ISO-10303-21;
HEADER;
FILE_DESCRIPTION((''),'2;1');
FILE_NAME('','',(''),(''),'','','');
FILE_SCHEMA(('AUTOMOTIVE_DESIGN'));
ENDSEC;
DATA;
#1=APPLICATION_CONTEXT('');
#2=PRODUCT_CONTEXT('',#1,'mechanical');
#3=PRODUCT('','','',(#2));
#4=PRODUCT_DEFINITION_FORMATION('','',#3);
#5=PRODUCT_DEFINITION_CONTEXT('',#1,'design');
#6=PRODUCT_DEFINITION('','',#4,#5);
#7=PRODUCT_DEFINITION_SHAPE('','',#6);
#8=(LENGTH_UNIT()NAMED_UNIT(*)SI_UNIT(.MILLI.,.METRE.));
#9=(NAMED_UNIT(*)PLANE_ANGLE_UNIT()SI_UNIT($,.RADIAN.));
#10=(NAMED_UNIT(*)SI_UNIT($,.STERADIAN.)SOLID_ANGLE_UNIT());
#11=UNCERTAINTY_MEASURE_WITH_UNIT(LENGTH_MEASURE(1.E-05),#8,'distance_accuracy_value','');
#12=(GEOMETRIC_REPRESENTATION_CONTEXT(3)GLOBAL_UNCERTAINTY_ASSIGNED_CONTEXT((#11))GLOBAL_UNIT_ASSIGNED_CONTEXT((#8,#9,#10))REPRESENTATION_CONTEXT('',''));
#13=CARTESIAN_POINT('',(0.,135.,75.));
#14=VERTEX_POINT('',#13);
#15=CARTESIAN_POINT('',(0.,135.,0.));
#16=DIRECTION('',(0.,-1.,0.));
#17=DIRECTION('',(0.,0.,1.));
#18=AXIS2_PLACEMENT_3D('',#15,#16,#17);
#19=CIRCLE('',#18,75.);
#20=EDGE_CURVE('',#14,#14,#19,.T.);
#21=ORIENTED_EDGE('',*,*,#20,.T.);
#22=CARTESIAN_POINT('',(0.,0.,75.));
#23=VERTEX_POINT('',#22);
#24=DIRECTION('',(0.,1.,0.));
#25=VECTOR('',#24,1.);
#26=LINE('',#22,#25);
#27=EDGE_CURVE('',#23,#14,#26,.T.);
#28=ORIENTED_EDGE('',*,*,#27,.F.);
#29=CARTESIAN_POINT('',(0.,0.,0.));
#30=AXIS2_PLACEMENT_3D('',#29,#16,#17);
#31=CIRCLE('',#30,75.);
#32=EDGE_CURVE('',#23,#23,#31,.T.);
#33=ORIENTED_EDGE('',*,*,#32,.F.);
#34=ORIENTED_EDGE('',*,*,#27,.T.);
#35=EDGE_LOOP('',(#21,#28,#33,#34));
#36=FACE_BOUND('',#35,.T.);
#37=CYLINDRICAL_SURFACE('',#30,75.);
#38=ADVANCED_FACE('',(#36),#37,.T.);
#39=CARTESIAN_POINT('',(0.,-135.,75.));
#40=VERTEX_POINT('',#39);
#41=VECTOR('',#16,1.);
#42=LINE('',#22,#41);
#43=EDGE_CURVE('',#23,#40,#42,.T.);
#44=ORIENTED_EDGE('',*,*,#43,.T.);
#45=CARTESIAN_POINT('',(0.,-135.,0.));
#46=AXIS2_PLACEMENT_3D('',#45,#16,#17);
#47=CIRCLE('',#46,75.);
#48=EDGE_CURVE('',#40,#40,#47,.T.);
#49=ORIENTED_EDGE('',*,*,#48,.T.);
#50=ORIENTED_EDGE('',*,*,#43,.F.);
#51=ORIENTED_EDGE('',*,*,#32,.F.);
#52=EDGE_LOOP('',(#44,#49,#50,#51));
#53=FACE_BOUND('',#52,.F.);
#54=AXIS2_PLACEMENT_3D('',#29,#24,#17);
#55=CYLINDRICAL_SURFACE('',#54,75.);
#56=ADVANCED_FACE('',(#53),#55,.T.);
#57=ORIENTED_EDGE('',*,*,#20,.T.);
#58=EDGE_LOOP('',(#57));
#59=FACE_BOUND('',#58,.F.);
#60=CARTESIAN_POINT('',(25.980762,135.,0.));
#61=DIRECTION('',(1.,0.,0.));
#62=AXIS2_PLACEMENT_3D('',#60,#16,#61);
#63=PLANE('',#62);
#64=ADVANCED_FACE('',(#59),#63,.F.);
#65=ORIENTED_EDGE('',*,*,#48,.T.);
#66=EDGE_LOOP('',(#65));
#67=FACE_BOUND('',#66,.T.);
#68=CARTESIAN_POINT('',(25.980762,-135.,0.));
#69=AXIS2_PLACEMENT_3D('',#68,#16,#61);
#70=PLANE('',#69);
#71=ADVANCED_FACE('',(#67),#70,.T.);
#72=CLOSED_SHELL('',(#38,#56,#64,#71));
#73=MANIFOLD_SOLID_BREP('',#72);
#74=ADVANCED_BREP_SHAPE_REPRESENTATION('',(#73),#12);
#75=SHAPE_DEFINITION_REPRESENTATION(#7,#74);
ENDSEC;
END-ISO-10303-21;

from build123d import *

# Parameters (mm, degrees)
F1_DEPTH = 135
F2_DEPTH = 135


# Not quite as in the source:
# - the program builds the solid bodies; features that only make, move or delete a surface that nothing else refers to are left out


with BuildPart() as f1:
    # F0 (on Front) → F1 (new body)
    with BuildSketch(Plane.XZ):
        with BuildLine():
            ThreePointArc((0, -75), (53.033008589, -53.033008589), (75, 0))
            ThreePointArc((75, 0), (53.033008589, 53.033008589), (0, 75))
            Line((0, 75), (0, -75))
        make_face()
        with BuildLine():
            Line((0, -75), (0, 75))
            ThreePointArc((0, 75), (-75, 0), (0, -75))
        make_face()
    extrude(amount=-F1_DEPTH)

    # F2 (add): a face of the model
    f2_faces = [f1.faces().sort_by_distance(p)[0] for p in [
        (0, 0, 0),
    ]]
    extrude(f2_faces, amount=F2_DEPTH)


solid = f1.part
